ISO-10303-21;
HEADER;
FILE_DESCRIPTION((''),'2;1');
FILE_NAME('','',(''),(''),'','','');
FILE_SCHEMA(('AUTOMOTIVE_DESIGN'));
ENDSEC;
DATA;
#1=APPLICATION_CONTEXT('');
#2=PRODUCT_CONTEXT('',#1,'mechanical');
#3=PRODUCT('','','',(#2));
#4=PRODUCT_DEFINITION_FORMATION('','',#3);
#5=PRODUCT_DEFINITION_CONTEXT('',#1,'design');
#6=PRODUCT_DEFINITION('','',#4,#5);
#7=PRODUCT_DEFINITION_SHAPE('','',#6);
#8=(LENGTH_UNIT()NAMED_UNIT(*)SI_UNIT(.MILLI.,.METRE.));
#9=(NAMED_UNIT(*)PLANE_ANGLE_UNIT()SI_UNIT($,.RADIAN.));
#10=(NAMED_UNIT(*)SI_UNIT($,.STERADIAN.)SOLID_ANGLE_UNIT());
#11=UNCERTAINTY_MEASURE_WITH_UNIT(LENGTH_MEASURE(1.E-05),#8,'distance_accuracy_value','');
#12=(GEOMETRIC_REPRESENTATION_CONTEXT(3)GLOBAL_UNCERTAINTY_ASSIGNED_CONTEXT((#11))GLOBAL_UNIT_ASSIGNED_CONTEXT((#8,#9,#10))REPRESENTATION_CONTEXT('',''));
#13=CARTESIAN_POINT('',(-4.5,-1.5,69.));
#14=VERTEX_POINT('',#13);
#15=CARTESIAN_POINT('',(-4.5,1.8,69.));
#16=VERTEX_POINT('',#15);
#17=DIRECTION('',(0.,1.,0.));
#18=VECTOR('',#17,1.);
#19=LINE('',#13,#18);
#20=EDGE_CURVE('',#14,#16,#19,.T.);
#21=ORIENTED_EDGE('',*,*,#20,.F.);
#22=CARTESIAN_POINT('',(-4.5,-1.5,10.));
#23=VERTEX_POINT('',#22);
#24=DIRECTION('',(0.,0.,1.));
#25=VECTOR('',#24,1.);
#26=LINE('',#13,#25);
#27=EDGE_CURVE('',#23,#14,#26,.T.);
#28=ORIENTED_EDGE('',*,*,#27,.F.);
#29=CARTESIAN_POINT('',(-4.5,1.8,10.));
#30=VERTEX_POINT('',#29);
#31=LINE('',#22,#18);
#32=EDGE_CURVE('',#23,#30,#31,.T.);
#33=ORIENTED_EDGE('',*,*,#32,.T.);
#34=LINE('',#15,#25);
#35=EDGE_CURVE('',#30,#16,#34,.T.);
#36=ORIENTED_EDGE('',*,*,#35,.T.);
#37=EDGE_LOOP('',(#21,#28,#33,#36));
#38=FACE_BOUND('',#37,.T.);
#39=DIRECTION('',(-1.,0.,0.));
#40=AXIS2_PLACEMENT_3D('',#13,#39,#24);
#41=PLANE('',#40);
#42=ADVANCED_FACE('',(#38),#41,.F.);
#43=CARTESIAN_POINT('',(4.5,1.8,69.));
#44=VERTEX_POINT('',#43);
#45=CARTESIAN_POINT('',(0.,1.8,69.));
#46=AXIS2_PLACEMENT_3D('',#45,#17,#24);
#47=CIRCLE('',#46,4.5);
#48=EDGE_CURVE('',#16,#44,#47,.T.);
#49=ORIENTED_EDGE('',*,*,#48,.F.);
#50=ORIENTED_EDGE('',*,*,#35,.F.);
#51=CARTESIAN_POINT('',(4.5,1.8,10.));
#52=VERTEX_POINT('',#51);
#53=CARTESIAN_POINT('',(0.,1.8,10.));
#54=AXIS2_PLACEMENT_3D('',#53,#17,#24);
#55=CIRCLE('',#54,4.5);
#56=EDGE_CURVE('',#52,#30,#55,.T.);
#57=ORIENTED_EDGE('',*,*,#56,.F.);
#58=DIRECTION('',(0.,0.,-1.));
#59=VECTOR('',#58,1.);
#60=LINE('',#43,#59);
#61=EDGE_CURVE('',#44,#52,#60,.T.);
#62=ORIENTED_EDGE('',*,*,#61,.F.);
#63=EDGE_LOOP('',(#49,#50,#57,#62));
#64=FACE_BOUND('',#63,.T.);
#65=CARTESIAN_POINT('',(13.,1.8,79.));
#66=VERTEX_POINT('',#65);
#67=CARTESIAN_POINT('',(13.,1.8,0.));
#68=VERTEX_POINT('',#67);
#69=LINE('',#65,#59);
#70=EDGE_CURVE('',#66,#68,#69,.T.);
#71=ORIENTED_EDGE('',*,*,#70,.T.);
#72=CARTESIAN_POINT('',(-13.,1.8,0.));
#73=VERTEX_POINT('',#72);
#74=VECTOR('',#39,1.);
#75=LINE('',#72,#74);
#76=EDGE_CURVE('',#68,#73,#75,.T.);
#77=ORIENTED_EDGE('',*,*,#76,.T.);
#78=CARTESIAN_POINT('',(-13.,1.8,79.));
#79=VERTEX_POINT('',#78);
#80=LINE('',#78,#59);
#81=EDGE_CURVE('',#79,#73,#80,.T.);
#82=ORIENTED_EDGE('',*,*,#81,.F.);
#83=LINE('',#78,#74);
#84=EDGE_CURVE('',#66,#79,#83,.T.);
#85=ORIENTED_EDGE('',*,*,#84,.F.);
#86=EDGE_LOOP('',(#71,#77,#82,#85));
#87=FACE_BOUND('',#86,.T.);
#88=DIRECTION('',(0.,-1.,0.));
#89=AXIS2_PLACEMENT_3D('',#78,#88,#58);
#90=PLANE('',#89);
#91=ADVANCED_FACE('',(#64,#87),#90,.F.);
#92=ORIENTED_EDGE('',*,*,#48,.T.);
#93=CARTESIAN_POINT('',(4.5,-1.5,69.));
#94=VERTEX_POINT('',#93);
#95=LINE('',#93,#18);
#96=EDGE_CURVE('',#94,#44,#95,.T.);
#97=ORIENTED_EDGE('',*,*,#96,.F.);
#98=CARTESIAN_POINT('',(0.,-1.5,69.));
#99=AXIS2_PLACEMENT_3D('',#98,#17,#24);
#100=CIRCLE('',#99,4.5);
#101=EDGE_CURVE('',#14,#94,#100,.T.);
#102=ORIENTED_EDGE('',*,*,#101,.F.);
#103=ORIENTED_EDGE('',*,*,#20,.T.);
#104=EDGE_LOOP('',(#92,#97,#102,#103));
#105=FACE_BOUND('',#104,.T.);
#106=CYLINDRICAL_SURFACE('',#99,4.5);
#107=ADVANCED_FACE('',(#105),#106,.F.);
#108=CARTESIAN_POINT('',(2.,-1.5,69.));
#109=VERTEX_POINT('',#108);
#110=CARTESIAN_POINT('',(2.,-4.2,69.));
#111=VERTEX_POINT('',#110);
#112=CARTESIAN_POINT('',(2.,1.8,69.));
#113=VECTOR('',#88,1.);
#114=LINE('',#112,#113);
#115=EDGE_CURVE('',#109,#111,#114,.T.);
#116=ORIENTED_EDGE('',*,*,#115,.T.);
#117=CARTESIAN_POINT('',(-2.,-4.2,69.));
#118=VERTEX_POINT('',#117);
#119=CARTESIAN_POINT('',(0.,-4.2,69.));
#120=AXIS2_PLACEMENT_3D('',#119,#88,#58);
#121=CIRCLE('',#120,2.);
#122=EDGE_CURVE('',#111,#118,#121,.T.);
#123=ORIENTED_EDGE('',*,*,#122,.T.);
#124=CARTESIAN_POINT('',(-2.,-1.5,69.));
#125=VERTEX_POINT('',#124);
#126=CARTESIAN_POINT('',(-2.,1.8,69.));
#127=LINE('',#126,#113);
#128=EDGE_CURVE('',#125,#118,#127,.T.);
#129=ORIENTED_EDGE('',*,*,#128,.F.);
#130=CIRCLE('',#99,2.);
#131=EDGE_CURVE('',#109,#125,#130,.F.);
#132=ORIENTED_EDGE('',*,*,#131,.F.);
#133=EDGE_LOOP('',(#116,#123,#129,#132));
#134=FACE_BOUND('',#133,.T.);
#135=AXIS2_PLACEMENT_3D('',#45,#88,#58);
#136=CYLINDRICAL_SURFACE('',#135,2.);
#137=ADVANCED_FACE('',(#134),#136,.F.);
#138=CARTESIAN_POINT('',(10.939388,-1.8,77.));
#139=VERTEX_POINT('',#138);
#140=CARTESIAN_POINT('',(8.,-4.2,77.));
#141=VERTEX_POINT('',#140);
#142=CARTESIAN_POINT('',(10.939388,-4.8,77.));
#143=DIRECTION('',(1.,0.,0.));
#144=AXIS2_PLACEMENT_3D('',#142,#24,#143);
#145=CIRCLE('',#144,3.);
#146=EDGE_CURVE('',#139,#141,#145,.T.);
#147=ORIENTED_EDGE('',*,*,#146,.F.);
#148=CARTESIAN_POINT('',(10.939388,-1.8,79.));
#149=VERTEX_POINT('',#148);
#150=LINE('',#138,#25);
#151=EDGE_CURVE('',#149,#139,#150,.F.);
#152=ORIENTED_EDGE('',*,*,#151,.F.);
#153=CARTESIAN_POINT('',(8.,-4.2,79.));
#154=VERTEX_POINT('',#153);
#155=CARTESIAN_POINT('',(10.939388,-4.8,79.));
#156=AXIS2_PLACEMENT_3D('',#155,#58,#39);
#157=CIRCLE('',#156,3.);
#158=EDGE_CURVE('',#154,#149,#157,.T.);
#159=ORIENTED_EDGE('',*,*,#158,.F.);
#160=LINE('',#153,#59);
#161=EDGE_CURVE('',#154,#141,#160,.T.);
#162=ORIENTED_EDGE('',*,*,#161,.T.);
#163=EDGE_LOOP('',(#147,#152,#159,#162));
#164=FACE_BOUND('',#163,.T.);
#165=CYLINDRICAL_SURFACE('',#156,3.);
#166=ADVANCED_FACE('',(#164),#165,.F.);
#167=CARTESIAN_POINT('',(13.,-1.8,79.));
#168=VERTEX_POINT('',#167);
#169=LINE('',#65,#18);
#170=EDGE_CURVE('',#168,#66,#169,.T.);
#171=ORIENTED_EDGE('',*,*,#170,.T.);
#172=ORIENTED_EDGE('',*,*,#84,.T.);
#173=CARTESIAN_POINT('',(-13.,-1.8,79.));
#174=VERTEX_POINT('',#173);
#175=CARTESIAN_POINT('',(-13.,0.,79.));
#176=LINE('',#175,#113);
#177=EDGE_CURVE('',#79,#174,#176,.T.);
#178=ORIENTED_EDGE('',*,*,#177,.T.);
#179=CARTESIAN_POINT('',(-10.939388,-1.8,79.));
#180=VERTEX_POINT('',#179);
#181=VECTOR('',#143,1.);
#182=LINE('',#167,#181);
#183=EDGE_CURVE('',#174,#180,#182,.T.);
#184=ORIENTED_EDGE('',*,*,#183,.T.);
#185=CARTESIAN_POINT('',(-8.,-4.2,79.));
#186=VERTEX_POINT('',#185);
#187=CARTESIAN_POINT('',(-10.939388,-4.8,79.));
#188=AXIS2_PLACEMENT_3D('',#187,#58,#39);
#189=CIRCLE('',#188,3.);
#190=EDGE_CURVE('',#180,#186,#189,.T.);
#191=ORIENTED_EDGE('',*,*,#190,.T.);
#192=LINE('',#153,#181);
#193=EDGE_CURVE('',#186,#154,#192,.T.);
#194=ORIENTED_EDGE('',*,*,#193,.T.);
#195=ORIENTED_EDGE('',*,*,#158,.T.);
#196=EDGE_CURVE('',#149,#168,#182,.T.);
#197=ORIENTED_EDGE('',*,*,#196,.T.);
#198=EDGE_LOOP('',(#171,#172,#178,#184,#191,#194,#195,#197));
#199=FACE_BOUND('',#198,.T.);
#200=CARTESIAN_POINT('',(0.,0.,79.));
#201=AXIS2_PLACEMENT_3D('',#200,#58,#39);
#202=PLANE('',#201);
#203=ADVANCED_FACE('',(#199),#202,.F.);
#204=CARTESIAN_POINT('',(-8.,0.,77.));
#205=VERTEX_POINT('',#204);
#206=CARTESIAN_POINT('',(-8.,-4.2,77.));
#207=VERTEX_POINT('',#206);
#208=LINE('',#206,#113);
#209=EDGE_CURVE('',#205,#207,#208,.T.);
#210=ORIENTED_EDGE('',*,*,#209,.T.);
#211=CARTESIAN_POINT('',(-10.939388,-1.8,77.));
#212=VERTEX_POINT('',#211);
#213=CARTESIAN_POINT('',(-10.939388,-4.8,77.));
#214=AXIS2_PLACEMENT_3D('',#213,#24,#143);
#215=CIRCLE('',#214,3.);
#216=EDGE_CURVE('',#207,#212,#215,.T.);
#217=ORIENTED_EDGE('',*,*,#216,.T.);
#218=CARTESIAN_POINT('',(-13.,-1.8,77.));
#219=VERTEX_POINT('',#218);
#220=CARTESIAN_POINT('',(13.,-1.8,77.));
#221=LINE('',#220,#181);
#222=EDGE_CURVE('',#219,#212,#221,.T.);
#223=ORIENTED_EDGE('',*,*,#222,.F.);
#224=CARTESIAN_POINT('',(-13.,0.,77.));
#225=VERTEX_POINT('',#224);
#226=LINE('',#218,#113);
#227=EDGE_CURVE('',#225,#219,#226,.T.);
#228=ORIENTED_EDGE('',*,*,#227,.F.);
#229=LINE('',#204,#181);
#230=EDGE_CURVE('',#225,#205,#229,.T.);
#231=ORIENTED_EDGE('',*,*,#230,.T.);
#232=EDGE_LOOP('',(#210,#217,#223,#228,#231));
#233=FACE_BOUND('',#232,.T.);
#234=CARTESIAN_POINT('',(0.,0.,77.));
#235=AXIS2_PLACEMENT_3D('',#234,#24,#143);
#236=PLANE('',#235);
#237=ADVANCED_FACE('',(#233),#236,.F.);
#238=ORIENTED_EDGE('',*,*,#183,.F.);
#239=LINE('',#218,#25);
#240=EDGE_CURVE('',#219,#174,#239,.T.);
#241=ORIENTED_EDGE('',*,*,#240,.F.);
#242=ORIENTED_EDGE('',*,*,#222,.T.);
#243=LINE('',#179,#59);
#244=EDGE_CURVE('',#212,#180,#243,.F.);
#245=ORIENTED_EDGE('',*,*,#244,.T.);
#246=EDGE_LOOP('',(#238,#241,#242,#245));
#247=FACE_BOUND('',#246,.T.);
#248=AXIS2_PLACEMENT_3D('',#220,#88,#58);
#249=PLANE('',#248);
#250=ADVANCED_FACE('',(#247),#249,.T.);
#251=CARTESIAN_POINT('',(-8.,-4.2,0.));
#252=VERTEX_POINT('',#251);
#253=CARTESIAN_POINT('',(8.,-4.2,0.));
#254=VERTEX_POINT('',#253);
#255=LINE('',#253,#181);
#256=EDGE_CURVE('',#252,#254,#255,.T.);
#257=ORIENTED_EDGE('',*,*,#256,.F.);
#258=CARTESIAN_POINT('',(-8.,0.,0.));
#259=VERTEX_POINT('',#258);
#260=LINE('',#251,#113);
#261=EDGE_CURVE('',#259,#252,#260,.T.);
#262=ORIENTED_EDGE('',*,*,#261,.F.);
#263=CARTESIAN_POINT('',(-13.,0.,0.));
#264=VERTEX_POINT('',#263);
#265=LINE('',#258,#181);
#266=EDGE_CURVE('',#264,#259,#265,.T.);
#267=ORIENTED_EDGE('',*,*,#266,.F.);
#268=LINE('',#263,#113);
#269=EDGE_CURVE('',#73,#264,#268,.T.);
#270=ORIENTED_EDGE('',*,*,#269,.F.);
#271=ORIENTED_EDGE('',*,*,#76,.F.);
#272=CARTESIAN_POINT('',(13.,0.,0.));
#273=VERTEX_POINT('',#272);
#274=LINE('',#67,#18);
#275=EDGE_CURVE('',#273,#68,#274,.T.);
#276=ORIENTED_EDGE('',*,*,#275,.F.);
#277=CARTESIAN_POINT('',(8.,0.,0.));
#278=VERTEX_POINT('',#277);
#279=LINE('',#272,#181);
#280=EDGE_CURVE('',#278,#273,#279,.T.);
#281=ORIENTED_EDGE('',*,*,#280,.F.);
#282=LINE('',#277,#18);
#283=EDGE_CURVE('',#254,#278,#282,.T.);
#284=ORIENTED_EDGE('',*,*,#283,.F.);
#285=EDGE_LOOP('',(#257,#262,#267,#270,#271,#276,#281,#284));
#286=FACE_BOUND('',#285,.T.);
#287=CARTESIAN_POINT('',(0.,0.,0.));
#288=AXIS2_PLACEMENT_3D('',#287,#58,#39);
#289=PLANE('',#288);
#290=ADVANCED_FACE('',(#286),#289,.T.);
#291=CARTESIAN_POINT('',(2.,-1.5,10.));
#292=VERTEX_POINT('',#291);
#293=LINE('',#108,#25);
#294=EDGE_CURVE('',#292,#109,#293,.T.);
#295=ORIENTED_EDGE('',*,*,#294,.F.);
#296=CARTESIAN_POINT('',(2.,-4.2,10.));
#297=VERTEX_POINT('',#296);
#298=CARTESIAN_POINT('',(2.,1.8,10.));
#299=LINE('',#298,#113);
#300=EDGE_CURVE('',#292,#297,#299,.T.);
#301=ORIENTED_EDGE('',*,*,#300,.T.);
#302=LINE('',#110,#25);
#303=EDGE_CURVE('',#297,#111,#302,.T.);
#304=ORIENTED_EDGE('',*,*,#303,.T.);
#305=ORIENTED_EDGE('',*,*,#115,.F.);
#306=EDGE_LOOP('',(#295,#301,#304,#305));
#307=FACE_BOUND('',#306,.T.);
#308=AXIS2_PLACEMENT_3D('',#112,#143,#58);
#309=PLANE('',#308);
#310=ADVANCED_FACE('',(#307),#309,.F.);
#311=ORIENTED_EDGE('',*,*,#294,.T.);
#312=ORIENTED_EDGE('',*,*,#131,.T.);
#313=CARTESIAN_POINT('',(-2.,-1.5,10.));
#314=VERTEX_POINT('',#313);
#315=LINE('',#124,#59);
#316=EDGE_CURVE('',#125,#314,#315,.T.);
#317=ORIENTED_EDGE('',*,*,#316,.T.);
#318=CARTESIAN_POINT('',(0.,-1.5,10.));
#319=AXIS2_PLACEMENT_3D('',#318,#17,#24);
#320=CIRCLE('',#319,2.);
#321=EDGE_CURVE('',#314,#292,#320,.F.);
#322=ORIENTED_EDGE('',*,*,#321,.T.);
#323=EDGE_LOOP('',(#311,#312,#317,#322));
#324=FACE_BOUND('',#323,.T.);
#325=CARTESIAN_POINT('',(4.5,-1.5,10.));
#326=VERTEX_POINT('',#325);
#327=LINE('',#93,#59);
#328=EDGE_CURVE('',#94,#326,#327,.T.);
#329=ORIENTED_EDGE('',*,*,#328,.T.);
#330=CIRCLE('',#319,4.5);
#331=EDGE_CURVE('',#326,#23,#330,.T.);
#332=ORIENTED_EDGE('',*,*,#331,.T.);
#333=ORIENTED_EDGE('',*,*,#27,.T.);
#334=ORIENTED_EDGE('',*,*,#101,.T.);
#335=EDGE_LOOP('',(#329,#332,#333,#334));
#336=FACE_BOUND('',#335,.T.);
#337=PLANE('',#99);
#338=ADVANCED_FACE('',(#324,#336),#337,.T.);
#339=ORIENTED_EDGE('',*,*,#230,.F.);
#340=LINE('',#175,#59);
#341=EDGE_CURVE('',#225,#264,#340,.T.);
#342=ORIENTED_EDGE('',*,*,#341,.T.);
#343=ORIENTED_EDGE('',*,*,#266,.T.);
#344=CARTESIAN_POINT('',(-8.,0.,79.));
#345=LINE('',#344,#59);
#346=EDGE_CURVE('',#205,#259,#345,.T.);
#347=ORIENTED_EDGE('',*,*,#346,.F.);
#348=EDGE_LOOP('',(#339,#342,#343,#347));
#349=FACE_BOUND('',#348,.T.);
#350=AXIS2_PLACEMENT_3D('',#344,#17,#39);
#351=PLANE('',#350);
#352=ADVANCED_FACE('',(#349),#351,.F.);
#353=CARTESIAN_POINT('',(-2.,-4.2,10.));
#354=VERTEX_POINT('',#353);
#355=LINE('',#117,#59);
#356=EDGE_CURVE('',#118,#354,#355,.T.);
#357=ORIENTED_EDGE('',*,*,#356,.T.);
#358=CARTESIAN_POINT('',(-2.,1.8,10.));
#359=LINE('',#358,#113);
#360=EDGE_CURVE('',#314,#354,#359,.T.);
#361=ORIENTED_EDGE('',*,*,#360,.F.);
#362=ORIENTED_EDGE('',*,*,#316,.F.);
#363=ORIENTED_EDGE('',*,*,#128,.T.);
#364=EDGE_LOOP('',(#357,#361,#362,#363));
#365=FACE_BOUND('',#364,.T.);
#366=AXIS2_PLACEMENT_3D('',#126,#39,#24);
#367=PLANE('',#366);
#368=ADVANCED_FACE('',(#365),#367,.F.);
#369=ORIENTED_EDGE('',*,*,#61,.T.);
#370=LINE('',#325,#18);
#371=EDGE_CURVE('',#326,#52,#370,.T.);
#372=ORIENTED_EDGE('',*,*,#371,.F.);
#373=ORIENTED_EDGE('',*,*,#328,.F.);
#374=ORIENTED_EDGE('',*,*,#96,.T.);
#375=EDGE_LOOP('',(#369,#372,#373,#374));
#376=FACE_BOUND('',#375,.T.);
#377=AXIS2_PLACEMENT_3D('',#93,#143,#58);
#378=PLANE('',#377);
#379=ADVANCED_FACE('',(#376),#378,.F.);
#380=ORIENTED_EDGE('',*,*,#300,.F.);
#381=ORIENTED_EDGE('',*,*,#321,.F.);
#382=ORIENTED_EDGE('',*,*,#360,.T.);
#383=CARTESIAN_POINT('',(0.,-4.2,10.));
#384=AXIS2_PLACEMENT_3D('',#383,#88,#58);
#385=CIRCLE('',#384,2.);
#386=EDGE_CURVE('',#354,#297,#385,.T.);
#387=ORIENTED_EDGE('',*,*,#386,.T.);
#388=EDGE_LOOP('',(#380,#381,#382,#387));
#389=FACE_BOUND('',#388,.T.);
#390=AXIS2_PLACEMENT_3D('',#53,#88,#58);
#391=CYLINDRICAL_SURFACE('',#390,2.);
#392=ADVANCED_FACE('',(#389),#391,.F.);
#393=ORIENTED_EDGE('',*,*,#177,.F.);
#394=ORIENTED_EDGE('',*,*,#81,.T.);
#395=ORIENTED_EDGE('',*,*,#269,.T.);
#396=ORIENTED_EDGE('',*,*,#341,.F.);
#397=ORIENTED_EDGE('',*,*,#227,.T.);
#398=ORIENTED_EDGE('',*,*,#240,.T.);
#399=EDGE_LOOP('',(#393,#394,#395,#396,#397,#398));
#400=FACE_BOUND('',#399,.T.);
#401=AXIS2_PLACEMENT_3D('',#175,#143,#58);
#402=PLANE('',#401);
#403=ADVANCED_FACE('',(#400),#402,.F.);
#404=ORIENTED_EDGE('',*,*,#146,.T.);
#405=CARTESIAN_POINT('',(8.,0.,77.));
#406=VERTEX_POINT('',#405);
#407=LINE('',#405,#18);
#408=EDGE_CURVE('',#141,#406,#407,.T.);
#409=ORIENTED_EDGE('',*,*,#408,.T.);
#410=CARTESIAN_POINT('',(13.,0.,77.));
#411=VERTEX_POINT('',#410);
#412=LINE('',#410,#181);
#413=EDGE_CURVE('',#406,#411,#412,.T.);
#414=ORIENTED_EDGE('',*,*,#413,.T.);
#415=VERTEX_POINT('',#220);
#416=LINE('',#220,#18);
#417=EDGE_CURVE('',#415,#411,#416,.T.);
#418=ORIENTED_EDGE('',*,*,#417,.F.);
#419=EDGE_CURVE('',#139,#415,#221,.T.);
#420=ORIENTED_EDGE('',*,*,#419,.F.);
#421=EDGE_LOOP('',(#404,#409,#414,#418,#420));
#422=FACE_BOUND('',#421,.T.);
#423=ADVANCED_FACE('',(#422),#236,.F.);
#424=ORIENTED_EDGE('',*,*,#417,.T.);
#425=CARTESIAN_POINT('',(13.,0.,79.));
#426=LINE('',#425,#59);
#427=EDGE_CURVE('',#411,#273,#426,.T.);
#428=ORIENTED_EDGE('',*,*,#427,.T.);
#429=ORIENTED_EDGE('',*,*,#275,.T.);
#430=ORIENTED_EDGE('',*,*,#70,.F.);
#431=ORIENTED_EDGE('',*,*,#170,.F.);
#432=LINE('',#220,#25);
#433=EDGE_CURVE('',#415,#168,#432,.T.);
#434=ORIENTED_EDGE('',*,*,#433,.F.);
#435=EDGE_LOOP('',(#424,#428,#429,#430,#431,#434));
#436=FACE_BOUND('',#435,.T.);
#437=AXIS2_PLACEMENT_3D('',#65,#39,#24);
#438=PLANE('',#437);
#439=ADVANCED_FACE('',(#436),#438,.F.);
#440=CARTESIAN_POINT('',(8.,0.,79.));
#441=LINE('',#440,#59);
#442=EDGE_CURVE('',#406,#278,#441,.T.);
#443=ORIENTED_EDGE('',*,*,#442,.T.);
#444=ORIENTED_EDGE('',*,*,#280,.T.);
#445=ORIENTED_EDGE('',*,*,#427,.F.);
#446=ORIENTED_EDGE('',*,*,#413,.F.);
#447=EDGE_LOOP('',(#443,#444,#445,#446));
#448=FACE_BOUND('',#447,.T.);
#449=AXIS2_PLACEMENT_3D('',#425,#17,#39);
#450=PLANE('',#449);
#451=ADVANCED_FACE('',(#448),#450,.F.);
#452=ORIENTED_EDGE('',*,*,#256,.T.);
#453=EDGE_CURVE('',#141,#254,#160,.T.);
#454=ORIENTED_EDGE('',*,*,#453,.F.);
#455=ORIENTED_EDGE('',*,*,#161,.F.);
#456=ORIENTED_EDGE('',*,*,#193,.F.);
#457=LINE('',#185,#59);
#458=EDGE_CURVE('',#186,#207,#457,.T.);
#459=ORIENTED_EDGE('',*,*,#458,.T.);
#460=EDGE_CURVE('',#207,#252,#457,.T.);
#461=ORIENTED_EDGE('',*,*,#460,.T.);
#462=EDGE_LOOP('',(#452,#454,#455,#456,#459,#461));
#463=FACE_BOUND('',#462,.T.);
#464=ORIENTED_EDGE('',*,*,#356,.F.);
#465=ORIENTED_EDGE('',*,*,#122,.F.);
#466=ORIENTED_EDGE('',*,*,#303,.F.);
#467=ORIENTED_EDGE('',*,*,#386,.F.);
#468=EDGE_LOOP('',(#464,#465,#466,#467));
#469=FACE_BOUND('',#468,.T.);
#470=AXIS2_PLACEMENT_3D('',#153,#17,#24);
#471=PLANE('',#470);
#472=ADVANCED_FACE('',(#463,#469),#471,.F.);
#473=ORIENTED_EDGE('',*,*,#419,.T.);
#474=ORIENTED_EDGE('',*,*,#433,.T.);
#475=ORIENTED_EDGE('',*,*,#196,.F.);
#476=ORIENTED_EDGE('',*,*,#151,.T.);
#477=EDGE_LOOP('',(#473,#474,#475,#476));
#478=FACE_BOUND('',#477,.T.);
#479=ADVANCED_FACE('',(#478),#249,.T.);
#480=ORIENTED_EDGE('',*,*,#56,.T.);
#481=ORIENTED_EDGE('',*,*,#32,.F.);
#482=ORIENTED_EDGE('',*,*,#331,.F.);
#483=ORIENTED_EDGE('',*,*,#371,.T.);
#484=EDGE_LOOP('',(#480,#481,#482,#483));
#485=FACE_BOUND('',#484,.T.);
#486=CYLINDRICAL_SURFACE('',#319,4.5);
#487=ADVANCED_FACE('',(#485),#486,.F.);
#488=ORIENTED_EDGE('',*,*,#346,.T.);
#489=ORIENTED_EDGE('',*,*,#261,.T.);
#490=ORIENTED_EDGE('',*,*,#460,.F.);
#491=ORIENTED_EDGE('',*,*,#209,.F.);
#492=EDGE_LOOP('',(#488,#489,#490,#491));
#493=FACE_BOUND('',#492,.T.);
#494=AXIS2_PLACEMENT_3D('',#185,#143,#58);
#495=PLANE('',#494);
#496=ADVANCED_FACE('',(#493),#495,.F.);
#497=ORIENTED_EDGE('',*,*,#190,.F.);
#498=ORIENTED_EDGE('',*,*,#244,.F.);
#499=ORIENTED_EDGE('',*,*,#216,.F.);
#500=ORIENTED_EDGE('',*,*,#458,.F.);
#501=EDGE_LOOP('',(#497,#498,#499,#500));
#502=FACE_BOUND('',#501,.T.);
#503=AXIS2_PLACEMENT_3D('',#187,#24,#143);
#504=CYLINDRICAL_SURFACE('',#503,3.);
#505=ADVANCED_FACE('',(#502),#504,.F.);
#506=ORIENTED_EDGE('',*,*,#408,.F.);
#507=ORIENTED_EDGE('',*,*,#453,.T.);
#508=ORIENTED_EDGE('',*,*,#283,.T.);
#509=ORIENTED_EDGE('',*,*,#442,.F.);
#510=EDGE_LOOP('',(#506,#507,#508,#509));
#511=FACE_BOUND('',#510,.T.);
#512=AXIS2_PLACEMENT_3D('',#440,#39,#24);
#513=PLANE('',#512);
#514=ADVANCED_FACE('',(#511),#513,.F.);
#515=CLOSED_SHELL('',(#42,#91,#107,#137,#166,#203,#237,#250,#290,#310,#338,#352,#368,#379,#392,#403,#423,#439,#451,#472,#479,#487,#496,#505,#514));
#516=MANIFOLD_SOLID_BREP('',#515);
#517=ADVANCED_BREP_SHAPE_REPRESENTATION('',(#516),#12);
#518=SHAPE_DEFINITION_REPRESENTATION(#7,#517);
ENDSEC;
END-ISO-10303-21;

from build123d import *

# Parameters (mm, degrees)
DODANIE_WYCI_GNI_CIE1_DEPTH = 79
WYTNIJ_WYCI_GNI_CIE1_DEPTH  = 81.286985247
WYTNIJ_WYCI_GNI_CIE2_DEPTH  = 3.3
SZKIC5_W                    = 26
SZKIC5_H                    = 3.6
SDF_DEPTH                   = 2
ZAOKR_GLENIE3_R             = 3


with BuildPart() as part:
    # Szkic1 → Dodanie-wyciągnięcie1 (new body)
    with BuildSketch(Plane.XY):
        Polygon((-13, 0), (-13, 1.8), (13, 1.8), (13, 0), (8, 0), (8, -4.2), (-8, -4.2), (-8, 0), align=None)
    extrude(amount=DODANIE_WYCI_GNI_CIE1_DEPTH)

    # Szkic3 → Wytnij-wyciągnięcie1 (cut, through all)
    with BuildSketch(Plane.XZ.offset(4.2)):
        with BuildLine():
            Line((2, 69), (2, 10))
            ThreePointArc((2, 10), (0, 8), (-2, 10))
            Line((-2, 10), (-2, 69))
            ThreePointArc((-2, 69), (0, 71), (2, 69))
        make_face()
    extrude(amount=-WYTNIJ_WYCI_GNI_CIE1_DEPTH, mode=Mode.SUBTRACT)

    # Szkic4 → Wytnij-wyciągnięcie2 (cut)
    with BuildSketch(Plane(origin=(0, 1.8, 0), x_dir=(1, 0, 0), z_dir=(0, 1, 0))):
        with BuildLine():
            Line((-4.5, -69), (-4.5, -10))
            ThreePointArc((-4.5, -10), (0, -5.5), (4.5, -10))
            Line((4.5, -10), (4.5, -69))
            ThreePointArc((4.5, -69), (0, -73.5), (-4.5, -69))
        make_face()
    extrude(amount=-WYTNIJ_WYCI_GNI_CIE2_DEPTH, mode=Mode.SUBTRACT)

    # Szkic5 → sdf (add)
    with BuildSketch(Plane.XY.offset(79)):
        Rectangle(SZKIC5_W, SZKIC5_H)
    extrude(amount=-SDF_DEPTH)

    # Zaokrąglenie3
    # the kernel refuses this fillet: 3 mm, written as the material it adds along each edge
    with BuildSketch(Plane(origin=(8, -1.8, 77), x_dir=(1.5609735726224723e-12, -1.0, 0), z_dir=(0, 0, 1)), Plane(origin=(-8, -1.8, 79), x_dir=(-1.5698553568194677e-12, -1.0, 0), z_dir=(0, 0, -1))) as zaokr_glenie3_piece_1:
        with BuildLine():
            CenterArc((3, 2.939387691), ZAOKR_GLENIE3_R, 180, 78.463040967)
            Line((0, 2.939387691), (-0.06, 2.939387691))
            Line((-0.06, 2.939387691), (-0.06, 0))
            Line((-0.06, 0), (0, -0.06))
            ThreePointArc((0, -0.06), (1.2, -0.06), (2.388, -0.058787754))
            Line((2.388, -0.058787754), (2.4, 0))
        make_face()
    extrude(amount=2)


solid = part.part
